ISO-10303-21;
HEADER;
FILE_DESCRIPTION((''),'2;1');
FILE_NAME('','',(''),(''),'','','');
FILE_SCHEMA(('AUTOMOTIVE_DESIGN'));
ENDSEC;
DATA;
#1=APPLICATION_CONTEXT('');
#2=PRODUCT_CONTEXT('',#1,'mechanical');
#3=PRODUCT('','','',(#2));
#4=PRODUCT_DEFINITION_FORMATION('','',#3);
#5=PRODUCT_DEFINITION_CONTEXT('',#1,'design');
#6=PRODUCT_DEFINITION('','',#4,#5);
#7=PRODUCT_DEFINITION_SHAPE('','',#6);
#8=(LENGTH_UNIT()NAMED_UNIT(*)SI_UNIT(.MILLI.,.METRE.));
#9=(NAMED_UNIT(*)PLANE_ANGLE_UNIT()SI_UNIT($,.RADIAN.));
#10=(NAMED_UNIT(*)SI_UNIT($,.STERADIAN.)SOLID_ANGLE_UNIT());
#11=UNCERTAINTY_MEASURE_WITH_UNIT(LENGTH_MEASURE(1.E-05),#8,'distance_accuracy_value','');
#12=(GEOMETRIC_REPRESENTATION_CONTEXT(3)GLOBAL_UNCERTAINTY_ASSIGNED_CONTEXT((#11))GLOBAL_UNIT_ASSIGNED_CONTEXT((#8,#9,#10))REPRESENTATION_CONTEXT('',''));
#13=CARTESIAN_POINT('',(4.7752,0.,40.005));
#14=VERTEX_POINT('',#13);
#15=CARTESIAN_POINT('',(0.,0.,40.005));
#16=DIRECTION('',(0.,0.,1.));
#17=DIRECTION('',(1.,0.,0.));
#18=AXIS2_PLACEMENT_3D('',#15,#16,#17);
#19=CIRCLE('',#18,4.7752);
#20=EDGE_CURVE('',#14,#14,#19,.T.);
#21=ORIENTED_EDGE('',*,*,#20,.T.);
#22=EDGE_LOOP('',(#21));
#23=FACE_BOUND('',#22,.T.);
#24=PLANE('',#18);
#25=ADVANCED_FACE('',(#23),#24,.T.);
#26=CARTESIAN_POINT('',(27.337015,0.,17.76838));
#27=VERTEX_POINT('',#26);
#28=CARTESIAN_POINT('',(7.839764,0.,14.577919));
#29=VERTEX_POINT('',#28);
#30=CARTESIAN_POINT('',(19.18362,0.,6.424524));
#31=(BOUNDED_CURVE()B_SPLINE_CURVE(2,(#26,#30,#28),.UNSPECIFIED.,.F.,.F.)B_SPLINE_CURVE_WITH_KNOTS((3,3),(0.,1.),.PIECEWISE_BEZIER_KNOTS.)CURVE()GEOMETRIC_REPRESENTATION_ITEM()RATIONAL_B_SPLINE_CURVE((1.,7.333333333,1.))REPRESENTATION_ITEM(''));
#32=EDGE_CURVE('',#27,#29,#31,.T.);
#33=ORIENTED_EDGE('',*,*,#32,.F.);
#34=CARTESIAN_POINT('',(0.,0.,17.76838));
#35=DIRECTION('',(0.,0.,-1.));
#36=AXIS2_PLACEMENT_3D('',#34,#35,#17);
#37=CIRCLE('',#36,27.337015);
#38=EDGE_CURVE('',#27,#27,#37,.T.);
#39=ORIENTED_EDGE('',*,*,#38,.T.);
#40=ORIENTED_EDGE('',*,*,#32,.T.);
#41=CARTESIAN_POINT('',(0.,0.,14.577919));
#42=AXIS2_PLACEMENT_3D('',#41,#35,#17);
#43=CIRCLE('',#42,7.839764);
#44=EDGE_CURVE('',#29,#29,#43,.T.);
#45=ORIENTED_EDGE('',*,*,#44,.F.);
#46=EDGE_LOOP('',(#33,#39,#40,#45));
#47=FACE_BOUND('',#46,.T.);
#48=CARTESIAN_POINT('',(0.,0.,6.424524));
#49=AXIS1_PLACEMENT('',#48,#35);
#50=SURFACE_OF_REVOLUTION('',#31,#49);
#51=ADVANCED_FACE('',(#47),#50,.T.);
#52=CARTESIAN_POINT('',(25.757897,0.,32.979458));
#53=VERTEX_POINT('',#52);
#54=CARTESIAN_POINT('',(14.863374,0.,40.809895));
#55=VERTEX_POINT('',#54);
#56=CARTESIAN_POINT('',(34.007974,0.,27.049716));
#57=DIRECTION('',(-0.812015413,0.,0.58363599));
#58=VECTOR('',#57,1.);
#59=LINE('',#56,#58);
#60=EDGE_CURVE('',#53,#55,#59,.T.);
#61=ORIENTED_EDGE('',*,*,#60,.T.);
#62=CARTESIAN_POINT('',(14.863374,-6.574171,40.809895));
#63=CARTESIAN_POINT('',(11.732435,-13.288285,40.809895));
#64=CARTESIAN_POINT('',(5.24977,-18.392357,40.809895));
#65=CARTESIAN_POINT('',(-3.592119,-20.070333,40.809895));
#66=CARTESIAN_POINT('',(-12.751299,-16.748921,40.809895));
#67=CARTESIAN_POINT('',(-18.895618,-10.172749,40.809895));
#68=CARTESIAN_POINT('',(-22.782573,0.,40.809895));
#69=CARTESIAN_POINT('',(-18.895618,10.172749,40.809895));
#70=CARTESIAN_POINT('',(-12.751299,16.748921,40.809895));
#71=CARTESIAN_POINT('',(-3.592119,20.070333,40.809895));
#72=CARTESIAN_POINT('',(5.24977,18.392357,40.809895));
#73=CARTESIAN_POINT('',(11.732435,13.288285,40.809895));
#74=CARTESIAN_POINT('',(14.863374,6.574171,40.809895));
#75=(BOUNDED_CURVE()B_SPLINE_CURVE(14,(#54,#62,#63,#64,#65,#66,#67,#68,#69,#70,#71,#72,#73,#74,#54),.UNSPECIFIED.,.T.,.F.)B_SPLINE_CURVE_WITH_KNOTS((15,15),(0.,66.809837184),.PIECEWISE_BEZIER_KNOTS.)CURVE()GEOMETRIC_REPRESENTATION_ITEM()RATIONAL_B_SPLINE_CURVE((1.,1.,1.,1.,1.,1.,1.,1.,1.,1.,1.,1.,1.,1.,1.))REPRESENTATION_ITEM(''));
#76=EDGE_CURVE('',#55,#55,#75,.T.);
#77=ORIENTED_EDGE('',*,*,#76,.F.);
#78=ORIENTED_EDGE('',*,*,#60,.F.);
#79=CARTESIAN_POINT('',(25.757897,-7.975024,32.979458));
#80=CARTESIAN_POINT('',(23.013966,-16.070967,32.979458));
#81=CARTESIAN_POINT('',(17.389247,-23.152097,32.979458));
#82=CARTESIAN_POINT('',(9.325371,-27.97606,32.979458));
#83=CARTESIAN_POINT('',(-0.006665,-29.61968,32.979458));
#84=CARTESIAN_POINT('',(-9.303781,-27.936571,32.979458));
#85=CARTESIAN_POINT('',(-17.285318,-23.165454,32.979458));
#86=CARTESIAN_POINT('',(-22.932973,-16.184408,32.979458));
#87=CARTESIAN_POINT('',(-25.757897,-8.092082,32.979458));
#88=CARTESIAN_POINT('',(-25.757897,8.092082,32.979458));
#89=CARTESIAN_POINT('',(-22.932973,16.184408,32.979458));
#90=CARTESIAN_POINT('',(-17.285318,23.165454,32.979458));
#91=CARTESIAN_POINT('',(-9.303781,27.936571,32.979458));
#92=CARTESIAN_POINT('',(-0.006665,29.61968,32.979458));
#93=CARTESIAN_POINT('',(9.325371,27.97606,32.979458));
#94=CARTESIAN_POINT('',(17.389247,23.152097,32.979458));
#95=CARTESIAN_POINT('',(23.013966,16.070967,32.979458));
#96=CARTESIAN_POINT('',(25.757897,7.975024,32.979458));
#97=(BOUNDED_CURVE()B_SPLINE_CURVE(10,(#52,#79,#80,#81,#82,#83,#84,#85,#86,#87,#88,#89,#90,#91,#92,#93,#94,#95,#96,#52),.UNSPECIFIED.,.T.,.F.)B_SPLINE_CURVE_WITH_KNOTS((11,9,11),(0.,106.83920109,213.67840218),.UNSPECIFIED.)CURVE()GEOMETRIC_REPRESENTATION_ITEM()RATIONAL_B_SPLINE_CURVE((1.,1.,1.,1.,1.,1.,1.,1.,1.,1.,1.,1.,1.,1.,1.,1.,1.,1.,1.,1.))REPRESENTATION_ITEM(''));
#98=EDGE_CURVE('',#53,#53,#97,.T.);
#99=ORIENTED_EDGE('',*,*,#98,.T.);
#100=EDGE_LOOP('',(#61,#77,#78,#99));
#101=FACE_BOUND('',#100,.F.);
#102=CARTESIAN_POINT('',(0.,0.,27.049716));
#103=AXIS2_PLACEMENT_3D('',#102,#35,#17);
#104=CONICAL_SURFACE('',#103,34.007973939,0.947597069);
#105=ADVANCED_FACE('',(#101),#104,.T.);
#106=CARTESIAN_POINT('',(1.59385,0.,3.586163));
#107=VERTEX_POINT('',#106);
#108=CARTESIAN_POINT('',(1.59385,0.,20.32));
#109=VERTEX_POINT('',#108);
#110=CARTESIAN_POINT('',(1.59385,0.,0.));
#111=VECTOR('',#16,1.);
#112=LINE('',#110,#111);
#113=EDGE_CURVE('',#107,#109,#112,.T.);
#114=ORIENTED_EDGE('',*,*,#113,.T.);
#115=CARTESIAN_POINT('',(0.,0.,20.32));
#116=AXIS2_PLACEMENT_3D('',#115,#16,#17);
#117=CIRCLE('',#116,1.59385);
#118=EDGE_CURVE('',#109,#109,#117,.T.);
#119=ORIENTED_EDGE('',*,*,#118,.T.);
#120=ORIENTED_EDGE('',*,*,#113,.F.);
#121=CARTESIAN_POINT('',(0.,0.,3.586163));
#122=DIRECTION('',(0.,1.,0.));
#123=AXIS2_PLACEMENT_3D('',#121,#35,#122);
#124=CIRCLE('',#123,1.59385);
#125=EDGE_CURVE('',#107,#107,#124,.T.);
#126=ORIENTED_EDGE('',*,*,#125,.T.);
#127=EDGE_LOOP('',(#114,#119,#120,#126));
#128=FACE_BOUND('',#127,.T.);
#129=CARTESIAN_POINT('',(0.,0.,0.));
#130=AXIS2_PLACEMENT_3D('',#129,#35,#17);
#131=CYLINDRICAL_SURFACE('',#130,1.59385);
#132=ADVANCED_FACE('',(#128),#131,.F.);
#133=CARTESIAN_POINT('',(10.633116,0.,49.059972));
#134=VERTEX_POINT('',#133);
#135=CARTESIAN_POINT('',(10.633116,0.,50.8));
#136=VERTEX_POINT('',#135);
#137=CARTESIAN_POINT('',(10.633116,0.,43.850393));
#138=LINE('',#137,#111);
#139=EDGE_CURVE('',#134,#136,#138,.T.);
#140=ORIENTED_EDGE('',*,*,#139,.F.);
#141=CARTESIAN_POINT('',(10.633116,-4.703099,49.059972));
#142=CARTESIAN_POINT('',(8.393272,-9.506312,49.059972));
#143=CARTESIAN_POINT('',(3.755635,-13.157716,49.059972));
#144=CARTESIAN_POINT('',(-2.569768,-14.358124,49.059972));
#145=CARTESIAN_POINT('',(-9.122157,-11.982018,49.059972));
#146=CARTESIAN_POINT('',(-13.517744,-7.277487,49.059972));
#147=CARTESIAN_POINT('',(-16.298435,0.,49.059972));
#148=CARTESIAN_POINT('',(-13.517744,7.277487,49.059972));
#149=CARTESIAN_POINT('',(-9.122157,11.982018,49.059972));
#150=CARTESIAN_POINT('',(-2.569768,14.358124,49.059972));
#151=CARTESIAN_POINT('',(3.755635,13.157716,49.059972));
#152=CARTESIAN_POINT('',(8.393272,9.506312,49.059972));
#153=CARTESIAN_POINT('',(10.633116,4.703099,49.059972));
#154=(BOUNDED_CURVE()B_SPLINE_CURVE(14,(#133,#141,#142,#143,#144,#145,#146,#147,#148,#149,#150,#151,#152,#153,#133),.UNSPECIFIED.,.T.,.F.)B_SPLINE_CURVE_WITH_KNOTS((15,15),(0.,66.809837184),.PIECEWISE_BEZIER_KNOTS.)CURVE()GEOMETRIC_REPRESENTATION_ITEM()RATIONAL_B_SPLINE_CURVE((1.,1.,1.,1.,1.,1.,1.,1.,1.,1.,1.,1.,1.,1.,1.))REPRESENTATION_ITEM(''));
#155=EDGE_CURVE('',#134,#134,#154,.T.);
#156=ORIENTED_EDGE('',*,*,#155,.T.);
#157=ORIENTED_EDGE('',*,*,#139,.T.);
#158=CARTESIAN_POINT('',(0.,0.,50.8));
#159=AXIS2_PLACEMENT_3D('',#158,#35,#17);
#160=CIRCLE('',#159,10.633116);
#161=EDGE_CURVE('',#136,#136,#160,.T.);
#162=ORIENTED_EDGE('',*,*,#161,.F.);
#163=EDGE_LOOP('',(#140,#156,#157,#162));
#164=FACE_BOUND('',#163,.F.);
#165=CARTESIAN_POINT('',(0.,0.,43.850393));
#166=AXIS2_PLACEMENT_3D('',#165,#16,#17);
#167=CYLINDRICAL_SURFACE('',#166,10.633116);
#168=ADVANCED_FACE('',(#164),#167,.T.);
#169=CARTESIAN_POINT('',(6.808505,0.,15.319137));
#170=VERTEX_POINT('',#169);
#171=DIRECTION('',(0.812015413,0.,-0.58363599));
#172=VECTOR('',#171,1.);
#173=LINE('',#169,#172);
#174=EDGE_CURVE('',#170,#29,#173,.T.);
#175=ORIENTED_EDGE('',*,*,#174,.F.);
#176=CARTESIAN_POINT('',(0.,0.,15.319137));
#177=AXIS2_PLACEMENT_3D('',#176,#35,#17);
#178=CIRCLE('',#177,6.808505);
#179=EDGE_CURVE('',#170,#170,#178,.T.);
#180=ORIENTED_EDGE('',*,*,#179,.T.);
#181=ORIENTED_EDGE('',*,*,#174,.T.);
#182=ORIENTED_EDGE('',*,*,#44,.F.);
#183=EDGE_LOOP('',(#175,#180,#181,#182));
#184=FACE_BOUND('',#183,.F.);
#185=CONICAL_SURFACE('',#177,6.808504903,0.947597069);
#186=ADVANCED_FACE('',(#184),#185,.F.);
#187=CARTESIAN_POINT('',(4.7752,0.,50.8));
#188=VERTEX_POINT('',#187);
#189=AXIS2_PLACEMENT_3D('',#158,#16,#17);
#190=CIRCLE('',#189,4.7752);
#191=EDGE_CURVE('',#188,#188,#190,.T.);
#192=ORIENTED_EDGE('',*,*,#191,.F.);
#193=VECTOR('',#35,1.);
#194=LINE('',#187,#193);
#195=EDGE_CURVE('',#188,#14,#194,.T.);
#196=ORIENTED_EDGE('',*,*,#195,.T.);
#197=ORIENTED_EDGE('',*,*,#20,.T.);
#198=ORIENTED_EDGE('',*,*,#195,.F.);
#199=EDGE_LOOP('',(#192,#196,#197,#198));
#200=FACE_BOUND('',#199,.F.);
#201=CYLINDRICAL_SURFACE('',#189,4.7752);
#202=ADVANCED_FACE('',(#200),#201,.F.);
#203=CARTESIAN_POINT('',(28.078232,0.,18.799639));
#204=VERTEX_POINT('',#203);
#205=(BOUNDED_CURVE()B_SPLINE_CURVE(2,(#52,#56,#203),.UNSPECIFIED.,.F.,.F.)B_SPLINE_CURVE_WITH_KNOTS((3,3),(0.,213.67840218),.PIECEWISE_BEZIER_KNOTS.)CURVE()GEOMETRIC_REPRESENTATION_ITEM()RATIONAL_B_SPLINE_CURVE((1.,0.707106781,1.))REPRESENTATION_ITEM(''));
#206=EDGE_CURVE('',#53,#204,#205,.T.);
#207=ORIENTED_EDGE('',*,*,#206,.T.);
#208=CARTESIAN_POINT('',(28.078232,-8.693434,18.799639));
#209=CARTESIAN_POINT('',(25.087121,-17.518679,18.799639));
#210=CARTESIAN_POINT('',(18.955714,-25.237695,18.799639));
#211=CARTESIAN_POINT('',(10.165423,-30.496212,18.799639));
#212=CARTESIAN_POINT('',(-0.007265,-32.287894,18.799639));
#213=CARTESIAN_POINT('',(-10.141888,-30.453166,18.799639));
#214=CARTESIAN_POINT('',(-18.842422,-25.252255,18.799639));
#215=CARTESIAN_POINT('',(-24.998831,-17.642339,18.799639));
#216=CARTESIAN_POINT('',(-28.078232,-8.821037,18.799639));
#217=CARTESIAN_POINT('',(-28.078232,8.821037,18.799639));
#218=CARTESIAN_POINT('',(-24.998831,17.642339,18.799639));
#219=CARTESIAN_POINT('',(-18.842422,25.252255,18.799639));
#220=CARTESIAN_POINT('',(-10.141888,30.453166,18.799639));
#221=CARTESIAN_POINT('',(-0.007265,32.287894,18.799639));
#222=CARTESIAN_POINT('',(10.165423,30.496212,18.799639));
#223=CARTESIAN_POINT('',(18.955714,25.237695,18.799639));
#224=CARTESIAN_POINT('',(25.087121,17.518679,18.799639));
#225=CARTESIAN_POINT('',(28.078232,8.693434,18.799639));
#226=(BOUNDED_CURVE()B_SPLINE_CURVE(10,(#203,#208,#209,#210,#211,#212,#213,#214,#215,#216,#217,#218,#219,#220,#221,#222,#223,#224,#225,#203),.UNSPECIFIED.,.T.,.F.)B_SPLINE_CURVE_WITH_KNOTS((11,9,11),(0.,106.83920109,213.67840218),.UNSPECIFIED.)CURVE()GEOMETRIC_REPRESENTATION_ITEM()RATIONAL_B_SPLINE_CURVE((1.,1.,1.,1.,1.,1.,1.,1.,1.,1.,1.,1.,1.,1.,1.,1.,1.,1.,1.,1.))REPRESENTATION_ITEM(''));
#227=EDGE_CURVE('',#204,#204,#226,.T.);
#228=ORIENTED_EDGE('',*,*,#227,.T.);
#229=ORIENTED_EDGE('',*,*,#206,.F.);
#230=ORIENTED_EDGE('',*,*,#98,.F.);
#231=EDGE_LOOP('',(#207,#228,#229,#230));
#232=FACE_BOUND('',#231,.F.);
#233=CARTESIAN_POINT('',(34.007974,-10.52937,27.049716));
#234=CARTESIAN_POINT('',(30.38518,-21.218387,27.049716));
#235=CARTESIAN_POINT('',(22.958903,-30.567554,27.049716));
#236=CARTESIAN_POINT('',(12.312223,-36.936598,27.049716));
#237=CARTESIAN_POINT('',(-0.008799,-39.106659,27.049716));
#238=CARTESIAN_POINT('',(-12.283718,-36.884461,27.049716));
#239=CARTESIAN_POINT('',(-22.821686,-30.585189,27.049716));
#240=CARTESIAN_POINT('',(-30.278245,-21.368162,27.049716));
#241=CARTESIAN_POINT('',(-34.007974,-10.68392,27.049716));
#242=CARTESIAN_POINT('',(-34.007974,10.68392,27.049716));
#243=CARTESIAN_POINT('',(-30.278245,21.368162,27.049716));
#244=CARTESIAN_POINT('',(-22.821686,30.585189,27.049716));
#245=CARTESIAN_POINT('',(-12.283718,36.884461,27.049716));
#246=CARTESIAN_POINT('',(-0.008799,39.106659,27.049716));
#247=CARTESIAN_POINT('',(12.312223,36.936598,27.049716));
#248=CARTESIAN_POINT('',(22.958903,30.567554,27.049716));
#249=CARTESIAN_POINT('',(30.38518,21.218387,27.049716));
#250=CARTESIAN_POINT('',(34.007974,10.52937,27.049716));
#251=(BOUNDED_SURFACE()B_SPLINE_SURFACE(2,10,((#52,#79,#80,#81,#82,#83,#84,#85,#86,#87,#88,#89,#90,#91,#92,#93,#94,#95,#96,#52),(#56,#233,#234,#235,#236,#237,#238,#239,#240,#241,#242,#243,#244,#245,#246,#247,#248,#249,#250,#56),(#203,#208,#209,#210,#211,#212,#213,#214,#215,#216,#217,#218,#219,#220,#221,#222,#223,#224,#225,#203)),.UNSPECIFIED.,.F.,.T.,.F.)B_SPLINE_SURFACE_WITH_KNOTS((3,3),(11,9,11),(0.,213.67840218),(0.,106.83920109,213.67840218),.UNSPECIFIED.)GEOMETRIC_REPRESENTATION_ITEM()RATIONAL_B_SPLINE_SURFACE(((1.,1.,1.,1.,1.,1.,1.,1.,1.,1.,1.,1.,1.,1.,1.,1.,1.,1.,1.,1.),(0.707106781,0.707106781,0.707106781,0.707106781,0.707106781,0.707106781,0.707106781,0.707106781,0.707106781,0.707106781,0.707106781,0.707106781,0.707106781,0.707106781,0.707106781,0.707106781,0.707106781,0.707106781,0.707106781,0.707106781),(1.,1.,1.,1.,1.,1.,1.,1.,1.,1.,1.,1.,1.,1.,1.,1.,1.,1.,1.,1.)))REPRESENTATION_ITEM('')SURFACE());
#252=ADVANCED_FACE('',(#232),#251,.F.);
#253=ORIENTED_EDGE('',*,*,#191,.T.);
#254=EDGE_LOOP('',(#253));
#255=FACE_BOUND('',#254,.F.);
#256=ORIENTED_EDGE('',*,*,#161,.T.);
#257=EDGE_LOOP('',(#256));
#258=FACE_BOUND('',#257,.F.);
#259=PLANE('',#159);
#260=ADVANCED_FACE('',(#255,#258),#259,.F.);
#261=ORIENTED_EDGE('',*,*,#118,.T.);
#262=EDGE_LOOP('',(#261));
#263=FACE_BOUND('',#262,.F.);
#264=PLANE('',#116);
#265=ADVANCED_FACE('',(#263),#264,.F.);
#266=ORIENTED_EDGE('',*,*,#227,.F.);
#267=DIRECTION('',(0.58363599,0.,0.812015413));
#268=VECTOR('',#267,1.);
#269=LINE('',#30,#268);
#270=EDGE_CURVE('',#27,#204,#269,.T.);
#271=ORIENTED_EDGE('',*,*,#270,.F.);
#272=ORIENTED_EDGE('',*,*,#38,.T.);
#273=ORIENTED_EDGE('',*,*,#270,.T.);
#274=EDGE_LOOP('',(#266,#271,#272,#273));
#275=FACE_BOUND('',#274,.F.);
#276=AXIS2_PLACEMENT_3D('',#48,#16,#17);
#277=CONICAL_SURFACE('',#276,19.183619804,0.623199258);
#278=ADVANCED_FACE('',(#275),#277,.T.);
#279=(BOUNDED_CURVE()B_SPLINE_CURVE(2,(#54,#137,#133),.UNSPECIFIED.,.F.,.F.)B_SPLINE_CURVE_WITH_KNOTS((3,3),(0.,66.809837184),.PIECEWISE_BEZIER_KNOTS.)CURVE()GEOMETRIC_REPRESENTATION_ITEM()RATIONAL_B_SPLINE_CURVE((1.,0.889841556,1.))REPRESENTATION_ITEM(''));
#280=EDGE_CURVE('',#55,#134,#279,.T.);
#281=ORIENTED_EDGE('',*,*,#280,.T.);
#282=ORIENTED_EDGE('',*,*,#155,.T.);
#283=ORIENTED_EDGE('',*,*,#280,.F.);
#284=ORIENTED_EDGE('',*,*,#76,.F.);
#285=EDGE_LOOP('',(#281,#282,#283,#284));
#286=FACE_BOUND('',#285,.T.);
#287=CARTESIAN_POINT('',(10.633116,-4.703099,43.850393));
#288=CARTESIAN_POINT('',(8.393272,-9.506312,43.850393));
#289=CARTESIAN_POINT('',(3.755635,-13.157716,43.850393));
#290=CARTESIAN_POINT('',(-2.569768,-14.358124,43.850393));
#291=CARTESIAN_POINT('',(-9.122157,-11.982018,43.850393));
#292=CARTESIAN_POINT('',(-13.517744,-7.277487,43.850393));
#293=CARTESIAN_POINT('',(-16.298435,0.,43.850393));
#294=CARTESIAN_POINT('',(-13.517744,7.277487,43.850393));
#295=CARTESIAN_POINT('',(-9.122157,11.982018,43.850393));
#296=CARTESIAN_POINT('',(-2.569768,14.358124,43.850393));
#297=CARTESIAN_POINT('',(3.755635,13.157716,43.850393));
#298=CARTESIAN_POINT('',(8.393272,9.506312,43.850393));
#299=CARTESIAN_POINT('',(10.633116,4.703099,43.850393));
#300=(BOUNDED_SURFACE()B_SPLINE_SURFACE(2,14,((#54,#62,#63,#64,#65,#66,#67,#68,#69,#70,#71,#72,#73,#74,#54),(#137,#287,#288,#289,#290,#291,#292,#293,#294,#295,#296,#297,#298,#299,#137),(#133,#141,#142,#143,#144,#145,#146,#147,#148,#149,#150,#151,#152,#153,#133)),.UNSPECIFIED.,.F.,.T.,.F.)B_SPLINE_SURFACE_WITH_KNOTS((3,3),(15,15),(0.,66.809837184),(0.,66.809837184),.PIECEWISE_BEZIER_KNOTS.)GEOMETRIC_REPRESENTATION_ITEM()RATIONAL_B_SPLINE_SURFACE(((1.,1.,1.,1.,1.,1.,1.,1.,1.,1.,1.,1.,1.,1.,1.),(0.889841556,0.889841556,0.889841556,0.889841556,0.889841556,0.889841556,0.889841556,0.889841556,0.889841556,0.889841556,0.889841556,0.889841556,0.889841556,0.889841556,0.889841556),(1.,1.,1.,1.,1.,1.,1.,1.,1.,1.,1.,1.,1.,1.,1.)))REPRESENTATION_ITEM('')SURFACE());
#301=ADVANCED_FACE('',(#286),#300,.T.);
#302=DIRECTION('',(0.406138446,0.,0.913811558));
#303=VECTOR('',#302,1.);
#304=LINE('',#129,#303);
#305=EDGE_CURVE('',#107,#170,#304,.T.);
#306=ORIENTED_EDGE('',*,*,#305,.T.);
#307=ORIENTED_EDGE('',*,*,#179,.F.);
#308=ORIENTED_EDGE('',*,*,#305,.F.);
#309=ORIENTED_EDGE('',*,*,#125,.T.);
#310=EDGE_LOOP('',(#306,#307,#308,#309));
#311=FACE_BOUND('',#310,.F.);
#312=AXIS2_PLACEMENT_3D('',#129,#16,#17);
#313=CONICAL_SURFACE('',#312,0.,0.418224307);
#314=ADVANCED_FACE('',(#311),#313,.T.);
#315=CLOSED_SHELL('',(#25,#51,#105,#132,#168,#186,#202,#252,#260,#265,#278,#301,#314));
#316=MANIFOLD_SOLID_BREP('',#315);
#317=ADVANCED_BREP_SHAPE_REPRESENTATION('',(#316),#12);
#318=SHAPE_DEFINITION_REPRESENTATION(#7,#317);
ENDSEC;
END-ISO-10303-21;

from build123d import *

# Parameters (mm, degrees)
F2_R     = 10.16
F3_R     = 10.16
F5_R     = 4.7752
F6_DEPTH = 10.795
F7_R     = 1.59385
F8_DEPTH = 20.32


# Not quite as in the source:
# - a fillet or chamfer that OpenCascade refuses, or shapes differently, is made with other operations: its cross-section is extruded or revolved along the edge and cut away or added


with BuildPart() as f1:
    # F0 (on Front) → F1 (revolve)
    with BuildSketch(Plane.XZ):
        Polygon((0, 50.8), (0, 0), (6.8085049027, 15.3191369531), (19.1836198036, 6.4245244719), (34.007973939, 27.0497159733), (10.633115835, 43.8503926785), (10.633115835, 50.8), align=None)
    revolve(axis=Axis((0, 0, 25.4), (0, 0, -1)))

    # F2
    f2_edges = [f1.edges().sort_by_distance(p)[0] for p in [
        (-10.633116, 0, 43.850393),
    ]]
    fillet(f2_edges, radius=F2_R)

    # F3
    f3_edges = [f1.edges().sort_by_distance(p)[0] for p in [
        (24.435674, 0, 33.929805),
        (-14.86337, 0, 40.809895),
        (-34.007974, 0, 27.049716),
    ]]
    fillet(f3_edges, radius=F3_R)

    # F4: fillet of radius 13.97 on 3 edges, made by hand

    # F4_s1 → F4_t2 (revolve, cut)
    with BuildSketch(Plane.XZ):
        with BuildLine():
            add(Edge.make_bspline(
                [(27.337014578, 17.7683797976), (19.1836198036, 6.4245244719), (7.8397644778, 14.5779192464)],
                knots=[0, 0, 0, 1, 1, 1], degree=2, weights=[1, 7.3333333333, 1]))
            Line((7.8397644778, 14.5779192464), (19.1836198036, 6.4245244719))
            Line((19.1836198036, 6.4245244719), (27.337014578, 17.7683797976))
        make_face()
    revolve(axis=Axis((0, 0, 6.4245244719), (0, 0, -1)), mode=Mode.SUBTRACT)

    # F5 (on face) → F6 (cut)
    with BuildSketch(Plane.XY.offset(50.8)):
        Circle(F5_R)
    extrude(amount=-F6_DEPTH, mode=Mode.SUBTRACT)

    # F7 (on Top) → F8 (cut)
    with BuildSketch(Plane.XY):
        Circle(F7_R)
    extrude(amount=F8_DEPTH, mode=Mode.SUBTRACT)


solid = f1.part
